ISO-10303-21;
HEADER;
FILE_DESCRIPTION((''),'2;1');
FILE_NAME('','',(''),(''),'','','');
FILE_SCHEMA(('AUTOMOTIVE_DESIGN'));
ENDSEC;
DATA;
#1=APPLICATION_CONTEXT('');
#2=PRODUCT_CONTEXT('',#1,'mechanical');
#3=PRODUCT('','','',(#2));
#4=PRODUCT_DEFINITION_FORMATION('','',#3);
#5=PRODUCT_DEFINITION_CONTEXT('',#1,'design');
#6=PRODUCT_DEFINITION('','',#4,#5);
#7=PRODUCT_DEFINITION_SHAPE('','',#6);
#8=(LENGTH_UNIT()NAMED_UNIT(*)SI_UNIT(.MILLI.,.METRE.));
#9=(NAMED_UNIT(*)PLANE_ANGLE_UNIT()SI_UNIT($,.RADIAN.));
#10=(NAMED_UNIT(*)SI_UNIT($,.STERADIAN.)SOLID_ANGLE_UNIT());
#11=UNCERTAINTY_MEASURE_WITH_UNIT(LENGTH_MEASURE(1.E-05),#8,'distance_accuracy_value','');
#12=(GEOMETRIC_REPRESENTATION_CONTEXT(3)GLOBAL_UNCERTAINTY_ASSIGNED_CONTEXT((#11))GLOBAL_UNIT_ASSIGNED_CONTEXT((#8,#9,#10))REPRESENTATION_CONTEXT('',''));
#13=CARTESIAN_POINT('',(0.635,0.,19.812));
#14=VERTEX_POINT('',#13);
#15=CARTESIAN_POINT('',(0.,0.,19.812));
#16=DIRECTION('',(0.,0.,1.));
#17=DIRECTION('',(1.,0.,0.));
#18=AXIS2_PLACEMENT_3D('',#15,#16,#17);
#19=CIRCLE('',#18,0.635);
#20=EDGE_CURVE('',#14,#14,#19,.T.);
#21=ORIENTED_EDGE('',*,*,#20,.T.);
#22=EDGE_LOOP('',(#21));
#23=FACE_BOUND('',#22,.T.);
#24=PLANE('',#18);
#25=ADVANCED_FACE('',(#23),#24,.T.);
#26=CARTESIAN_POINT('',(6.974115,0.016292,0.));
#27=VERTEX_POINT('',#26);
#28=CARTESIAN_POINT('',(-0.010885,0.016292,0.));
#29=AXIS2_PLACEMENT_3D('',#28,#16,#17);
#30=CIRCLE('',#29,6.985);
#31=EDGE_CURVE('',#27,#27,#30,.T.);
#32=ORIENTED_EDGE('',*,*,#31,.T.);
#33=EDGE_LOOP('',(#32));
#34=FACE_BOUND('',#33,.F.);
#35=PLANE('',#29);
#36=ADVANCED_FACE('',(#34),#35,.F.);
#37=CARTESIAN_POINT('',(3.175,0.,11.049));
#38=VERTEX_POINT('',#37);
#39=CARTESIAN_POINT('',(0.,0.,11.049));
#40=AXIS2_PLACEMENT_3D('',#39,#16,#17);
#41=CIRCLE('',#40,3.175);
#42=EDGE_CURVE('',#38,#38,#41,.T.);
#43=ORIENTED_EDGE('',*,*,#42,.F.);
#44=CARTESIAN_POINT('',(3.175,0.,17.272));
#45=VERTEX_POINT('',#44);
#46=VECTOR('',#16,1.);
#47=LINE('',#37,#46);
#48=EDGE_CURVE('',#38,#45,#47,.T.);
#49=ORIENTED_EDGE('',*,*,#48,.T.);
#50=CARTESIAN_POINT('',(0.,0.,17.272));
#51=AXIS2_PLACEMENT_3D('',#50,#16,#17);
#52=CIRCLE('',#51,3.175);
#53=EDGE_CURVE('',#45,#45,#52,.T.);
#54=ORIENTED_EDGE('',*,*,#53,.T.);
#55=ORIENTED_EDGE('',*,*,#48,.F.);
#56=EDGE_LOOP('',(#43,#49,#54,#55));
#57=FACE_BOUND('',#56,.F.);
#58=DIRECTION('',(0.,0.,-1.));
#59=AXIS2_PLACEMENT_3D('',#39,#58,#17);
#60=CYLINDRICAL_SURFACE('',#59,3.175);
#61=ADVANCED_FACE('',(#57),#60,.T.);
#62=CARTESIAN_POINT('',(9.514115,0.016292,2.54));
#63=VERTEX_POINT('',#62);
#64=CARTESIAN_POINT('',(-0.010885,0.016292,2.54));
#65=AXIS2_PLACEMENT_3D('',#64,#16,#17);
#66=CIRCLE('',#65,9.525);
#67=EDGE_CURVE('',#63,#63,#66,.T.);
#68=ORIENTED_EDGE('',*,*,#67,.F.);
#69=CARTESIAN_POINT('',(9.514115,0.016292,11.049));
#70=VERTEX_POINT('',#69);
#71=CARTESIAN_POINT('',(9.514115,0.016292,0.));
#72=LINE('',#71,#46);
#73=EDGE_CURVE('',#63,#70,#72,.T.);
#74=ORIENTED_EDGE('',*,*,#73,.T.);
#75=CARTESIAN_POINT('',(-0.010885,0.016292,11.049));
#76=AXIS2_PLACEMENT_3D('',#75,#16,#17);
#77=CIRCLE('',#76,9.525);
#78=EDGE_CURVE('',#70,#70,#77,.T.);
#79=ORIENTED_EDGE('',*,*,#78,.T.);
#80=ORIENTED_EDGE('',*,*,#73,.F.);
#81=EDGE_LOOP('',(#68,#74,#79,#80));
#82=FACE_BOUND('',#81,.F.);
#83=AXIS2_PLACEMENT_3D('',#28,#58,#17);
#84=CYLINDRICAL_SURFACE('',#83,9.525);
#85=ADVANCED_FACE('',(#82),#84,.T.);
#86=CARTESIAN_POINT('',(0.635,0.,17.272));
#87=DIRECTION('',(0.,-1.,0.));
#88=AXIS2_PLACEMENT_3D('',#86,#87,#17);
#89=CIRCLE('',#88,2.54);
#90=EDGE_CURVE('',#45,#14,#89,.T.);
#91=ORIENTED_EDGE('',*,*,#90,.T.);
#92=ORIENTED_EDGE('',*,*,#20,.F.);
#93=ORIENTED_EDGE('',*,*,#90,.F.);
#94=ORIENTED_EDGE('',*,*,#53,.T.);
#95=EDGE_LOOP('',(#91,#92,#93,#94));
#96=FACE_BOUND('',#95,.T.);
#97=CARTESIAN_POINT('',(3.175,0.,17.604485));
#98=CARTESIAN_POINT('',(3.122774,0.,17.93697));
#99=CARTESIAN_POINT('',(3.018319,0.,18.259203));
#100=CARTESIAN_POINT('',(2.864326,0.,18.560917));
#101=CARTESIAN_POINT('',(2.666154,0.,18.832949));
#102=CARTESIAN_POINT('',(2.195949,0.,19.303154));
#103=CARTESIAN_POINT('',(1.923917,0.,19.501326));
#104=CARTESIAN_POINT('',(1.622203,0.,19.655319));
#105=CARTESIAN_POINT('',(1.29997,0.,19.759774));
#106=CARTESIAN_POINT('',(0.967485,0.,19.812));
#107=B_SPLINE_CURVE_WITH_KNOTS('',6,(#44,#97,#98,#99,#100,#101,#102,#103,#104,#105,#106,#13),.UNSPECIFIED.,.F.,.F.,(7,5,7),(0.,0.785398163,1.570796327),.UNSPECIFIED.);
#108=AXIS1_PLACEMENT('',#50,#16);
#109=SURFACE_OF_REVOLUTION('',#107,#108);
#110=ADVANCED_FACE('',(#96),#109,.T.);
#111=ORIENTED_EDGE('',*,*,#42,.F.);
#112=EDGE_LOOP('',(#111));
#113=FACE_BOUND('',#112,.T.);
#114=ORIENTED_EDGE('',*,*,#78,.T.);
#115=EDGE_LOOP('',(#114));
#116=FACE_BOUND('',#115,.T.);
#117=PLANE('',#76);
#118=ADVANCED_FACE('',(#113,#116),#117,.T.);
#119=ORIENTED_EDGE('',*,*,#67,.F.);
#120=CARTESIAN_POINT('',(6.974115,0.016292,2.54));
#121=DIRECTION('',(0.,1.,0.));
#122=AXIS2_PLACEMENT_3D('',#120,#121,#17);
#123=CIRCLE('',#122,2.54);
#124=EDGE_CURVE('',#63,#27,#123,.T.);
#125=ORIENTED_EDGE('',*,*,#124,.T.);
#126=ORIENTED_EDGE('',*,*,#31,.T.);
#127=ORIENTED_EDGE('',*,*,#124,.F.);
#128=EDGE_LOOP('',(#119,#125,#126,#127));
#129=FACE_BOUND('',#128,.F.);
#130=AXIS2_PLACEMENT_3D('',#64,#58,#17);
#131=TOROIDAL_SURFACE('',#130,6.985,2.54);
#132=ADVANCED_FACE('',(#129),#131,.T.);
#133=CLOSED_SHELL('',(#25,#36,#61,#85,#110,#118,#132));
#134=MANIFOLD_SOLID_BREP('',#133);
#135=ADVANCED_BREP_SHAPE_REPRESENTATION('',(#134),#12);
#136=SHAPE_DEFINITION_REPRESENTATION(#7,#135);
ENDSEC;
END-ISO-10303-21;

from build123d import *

# Parameters (mm, degrees)
F0_R     = 9.525
F1_DEPTH = 11.049
F2_R     = 2.54
F3_R     = 3.175
F4_DEPTH = 8.763
F5_R     = 2.54


# Not quite as in the source:
# - a feature names something its author has since deleted; it is built from what else it names


with BuildPart() as f1:
    # F0 (on Top) → F1 (new body)
    with BuildSketch(Plane.XY):
        with Locations((-0.0108847216, 0.0162923955)):
            Circle(F0_R)
    extrude(amount=F1_DEPTH)

    # F2
    f2_edges = [f1.edges().sort_by_distance(p)[0] for p in [
        (-9.535885, 0.016292, 0),
    ]]
    fillet(f2_edges, radius=F2_R)

    # F3 (on face) → F4 (join)
    with BuildSketch(Plane.XY.offset(11.049)):
        Circle(F3_R)
    extrude(amount=F4_DEPTH)

    # F5
    f5_edges = [f1.edges().sort_by_distance(p)[0] for p in [
        (-3.175, 0, 19.812),
    ]]
    fillet(f5_edges, radius=F5_R)


solid = f1.part
